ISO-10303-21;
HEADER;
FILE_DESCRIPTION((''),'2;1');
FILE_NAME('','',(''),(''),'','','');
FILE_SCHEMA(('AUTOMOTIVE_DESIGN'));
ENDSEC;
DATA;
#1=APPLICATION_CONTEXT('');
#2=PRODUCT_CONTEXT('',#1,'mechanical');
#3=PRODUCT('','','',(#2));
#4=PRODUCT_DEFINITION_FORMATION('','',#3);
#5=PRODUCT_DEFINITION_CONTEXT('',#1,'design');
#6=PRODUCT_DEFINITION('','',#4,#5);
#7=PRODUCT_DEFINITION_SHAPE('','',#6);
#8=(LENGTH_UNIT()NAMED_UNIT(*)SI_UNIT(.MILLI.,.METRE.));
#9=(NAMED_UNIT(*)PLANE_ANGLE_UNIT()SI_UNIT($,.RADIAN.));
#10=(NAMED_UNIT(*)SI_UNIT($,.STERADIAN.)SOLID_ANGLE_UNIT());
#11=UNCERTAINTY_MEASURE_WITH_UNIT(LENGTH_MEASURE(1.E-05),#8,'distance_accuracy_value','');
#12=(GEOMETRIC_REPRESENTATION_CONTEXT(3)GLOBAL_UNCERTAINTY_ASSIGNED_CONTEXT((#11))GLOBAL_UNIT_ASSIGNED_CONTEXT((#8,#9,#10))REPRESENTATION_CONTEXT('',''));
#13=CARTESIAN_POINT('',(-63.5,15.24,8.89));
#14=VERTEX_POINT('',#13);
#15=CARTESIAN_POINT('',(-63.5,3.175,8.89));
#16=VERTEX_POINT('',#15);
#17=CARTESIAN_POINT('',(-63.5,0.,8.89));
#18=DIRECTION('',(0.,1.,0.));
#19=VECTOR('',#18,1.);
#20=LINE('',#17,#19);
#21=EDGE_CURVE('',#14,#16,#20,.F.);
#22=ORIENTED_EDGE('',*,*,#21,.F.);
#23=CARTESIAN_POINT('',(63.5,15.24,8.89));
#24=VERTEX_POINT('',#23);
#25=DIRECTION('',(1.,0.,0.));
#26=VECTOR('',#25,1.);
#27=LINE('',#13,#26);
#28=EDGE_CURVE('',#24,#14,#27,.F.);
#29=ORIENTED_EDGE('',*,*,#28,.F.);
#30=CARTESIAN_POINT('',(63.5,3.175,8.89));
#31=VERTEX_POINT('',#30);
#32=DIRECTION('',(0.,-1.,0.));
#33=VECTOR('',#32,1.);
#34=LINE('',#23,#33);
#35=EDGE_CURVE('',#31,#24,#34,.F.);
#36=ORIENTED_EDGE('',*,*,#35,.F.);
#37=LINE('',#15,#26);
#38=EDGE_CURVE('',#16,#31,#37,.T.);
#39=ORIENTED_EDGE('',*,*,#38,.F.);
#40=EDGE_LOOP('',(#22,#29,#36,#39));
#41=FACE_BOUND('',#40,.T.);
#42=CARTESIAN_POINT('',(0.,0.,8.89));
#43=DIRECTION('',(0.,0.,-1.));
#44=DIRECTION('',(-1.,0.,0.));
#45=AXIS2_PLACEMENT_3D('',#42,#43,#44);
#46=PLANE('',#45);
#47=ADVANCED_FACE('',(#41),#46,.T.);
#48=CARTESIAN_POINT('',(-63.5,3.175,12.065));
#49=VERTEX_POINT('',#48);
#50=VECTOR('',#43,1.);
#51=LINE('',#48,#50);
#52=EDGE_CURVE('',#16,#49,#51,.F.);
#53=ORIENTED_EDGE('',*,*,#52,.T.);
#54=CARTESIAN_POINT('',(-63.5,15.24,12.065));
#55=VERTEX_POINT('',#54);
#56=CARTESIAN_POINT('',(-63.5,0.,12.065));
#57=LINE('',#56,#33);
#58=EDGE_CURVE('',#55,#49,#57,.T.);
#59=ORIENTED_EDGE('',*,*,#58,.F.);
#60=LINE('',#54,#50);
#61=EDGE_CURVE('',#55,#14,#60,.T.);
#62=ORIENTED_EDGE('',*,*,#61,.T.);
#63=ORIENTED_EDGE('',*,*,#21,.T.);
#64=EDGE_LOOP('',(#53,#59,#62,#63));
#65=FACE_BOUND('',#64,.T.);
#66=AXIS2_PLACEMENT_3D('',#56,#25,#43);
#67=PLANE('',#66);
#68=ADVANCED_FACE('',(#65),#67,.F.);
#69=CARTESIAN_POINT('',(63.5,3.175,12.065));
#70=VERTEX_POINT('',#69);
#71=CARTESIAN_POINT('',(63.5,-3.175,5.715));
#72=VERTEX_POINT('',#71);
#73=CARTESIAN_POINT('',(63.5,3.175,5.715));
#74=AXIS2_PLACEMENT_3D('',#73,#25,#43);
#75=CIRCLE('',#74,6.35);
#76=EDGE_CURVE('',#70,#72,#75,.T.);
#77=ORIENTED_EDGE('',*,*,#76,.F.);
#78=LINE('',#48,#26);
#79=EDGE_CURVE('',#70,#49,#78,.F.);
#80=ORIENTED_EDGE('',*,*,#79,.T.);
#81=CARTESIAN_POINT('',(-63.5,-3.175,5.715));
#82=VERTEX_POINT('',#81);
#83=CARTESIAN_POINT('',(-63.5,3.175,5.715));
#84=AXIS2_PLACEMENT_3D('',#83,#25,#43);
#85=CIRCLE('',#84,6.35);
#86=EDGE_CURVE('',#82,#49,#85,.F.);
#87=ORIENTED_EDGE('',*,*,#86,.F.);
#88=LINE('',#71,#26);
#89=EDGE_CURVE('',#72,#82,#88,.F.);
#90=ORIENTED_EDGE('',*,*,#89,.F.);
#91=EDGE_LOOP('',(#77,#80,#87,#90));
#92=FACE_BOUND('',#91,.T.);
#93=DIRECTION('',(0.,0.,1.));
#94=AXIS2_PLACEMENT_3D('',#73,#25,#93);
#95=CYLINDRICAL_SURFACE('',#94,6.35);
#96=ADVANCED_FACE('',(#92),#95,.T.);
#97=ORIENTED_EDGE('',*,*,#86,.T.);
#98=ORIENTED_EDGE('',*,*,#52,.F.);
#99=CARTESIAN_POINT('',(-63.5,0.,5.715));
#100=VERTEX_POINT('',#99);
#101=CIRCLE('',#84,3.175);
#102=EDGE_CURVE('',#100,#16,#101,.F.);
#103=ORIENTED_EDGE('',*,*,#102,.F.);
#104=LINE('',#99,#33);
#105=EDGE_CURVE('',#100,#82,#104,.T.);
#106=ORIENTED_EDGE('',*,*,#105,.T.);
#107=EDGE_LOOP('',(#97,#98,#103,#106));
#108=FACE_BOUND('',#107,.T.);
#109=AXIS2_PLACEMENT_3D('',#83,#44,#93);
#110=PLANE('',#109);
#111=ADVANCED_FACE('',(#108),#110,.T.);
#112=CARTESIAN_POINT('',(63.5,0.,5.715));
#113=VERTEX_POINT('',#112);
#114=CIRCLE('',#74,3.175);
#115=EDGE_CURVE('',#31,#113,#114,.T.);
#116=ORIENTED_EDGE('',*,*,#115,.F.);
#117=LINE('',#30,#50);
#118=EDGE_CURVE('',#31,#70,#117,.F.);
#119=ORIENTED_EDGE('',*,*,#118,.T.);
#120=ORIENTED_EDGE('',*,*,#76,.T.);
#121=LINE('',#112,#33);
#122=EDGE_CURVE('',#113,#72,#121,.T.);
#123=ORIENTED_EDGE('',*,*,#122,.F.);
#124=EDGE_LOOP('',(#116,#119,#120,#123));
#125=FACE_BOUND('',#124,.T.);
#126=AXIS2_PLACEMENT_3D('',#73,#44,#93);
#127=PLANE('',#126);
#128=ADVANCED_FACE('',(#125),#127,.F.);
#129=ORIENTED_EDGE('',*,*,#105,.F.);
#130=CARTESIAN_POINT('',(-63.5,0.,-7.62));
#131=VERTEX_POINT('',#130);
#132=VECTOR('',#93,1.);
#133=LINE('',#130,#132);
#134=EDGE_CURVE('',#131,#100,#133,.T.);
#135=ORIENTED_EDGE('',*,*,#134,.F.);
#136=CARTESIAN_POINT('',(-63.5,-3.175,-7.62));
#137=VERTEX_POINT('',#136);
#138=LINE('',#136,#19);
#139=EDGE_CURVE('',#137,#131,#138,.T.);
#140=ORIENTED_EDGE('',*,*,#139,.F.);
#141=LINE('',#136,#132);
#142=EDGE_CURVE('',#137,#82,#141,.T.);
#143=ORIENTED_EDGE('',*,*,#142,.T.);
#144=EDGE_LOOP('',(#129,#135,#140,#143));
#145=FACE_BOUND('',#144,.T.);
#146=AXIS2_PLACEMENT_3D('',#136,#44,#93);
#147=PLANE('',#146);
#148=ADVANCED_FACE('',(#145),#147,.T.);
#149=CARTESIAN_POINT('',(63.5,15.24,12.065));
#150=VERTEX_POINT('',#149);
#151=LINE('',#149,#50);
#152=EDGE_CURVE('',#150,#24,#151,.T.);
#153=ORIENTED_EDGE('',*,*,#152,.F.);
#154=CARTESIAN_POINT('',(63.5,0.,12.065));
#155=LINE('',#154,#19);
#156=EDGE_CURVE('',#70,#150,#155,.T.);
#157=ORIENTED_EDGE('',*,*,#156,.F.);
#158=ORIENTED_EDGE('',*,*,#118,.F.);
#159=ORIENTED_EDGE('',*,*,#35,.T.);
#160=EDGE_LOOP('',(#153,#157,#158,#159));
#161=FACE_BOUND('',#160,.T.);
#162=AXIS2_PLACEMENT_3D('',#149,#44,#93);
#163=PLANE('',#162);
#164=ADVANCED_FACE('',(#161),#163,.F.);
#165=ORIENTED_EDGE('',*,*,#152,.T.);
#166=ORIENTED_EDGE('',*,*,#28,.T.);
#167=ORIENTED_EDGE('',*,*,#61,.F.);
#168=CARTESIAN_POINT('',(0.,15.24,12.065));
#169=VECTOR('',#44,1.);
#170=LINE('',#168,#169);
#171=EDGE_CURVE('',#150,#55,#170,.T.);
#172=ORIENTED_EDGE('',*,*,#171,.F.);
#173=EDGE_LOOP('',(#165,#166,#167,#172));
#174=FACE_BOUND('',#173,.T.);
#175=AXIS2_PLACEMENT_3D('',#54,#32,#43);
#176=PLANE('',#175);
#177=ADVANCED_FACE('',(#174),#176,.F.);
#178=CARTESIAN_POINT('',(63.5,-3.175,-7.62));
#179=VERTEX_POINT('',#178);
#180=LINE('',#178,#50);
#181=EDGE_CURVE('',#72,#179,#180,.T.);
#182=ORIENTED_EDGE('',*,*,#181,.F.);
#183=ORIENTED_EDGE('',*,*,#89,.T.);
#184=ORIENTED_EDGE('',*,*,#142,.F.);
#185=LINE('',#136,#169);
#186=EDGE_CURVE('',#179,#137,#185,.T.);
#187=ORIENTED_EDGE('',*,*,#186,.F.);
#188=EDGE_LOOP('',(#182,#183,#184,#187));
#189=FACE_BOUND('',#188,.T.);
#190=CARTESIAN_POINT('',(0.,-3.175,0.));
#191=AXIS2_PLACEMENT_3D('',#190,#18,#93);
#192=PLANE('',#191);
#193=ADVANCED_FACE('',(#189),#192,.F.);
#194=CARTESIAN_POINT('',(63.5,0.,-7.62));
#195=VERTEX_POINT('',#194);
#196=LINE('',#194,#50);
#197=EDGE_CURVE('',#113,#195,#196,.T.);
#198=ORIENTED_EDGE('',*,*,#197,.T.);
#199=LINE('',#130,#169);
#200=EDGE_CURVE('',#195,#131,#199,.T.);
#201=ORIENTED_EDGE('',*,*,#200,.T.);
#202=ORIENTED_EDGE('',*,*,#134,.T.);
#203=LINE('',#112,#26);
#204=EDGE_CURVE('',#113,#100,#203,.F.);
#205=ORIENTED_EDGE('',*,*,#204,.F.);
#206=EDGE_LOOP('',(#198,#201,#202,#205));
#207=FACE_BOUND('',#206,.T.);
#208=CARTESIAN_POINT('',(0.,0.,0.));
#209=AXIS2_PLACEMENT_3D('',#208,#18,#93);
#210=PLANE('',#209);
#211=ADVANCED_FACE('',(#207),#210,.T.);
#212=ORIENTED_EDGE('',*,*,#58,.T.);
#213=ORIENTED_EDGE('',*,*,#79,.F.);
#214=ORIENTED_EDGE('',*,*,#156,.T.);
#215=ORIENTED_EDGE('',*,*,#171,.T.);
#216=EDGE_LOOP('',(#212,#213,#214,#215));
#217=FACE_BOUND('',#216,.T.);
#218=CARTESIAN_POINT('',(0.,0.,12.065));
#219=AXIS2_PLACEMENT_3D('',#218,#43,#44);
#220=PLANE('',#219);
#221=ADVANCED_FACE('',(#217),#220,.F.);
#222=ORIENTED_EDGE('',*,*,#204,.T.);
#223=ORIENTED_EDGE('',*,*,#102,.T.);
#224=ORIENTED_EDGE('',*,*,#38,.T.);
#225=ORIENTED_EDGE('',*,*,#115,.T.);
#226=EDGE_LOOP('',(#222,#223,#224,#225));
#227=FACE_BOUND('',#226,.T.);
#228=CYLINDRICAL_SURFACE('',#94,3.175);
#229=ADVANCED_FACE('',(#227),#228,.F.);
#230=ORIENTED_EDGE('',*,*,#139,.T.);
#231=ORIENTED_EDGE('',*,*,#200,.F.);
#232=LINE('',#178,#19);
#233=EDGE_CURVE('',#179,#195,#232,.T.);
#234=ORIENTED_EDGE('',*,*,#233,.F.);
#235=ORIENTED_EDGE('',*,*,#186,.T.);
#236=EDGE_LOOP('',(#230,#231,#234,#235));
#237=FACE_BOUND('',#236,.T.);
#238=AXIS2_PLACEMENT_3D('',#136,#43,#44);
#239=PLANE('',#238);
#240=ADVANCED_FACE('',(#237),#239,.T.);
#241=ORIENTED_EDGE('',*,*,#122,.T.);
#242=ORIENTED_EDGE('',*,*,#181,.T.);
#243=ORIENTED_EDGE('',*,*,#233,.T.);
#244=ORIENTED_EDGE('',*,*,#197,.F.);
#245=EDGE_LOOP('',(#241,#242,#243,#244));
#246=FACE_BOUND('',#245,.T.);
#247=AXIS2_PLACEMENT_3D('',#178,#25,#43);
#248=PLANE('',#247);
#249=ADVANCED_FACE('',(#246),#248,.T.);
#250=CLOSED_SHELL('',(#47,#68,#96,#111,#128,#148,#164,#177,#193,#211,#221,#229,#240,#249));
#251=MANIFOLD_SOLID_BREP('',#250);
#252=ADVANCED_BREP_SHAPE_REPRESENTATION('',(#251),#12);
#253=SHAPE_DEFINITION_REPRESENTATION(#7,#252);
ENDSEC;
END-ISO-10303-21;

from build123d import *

# Parameters (mm, degrees)
SKETCH1_W                    = 127
SKETCH1_H                    = 15.24
BASE_FLANGE1_DEPTH           = 3.175
EDGE_FLANGE1_STRIP_W         = 20.32
EDGE_FLANGE1_STRIP_H         = 3.175
EDGE_FLANGE1_STRIP_CUT_DEPTH = 127
EDGE_FLANGE1_DEPTH           = 127


# Sheet-metal steps are written as plain solids
with BuildPart() as part:
    # Sketch1 → Base-Flange1 (new body)
    with BuildSketch(Plane(origin=(0, 0, 0), x_dir=(1, 0, 0), z_dir=(0, 1, 0))):
        Rectangle(SKETCH1_W, SKETCH1_H)
    extrude(amount=-BASE_FLANGE1_DEPTH)

    # Edge-Flange1 strip (across the edge) → Edge-Flange1 strip cut (cut)
    with BuildSketch(Plane(origin=(-63.5, 0, 8.89), x_dir=(0, 0, -1), z_dir=(1, 0, 0))):
        with Locations((-6.985, -1.5875)):
            Rectangle(EDGE_FLANGE1_STRIP_W, EDGE_FLANGE1_STRIP_H)
    extrude(amount=EDGE_FLANGE1_STRIP_CUT_DEPTH, mode=Mode.SUBTRACT)

    # Edge-Flange1 section (across the edge) → Edge-Flange1 (add)
    with BuildSketch(Plane(origin=(-63.5, 0, 8.89), x_dir=(0, 0, -1), z_dir=(1, 0, 0))):
        with BuildLine():
            Line((-3.175, 3.175), (-3.175, 15.24))
            Line((-3.175, 15.24), (0, 15.24))
            Line((0, 15.24), (0, 3.175))
            ThreePointArc((0, 3.175), (0.92993597, 0.92993597), (3.175, 0))
            Line((3.175, 0), (3.175, -3.175))
            ThreePointArc((3.175, -3.175), (-1.315128061, -1.315128061), (-3.175, 3.175))
        make_face()
    extrude(amount=EDGE_FLANGE1_DEPTH)


solid = part.part
